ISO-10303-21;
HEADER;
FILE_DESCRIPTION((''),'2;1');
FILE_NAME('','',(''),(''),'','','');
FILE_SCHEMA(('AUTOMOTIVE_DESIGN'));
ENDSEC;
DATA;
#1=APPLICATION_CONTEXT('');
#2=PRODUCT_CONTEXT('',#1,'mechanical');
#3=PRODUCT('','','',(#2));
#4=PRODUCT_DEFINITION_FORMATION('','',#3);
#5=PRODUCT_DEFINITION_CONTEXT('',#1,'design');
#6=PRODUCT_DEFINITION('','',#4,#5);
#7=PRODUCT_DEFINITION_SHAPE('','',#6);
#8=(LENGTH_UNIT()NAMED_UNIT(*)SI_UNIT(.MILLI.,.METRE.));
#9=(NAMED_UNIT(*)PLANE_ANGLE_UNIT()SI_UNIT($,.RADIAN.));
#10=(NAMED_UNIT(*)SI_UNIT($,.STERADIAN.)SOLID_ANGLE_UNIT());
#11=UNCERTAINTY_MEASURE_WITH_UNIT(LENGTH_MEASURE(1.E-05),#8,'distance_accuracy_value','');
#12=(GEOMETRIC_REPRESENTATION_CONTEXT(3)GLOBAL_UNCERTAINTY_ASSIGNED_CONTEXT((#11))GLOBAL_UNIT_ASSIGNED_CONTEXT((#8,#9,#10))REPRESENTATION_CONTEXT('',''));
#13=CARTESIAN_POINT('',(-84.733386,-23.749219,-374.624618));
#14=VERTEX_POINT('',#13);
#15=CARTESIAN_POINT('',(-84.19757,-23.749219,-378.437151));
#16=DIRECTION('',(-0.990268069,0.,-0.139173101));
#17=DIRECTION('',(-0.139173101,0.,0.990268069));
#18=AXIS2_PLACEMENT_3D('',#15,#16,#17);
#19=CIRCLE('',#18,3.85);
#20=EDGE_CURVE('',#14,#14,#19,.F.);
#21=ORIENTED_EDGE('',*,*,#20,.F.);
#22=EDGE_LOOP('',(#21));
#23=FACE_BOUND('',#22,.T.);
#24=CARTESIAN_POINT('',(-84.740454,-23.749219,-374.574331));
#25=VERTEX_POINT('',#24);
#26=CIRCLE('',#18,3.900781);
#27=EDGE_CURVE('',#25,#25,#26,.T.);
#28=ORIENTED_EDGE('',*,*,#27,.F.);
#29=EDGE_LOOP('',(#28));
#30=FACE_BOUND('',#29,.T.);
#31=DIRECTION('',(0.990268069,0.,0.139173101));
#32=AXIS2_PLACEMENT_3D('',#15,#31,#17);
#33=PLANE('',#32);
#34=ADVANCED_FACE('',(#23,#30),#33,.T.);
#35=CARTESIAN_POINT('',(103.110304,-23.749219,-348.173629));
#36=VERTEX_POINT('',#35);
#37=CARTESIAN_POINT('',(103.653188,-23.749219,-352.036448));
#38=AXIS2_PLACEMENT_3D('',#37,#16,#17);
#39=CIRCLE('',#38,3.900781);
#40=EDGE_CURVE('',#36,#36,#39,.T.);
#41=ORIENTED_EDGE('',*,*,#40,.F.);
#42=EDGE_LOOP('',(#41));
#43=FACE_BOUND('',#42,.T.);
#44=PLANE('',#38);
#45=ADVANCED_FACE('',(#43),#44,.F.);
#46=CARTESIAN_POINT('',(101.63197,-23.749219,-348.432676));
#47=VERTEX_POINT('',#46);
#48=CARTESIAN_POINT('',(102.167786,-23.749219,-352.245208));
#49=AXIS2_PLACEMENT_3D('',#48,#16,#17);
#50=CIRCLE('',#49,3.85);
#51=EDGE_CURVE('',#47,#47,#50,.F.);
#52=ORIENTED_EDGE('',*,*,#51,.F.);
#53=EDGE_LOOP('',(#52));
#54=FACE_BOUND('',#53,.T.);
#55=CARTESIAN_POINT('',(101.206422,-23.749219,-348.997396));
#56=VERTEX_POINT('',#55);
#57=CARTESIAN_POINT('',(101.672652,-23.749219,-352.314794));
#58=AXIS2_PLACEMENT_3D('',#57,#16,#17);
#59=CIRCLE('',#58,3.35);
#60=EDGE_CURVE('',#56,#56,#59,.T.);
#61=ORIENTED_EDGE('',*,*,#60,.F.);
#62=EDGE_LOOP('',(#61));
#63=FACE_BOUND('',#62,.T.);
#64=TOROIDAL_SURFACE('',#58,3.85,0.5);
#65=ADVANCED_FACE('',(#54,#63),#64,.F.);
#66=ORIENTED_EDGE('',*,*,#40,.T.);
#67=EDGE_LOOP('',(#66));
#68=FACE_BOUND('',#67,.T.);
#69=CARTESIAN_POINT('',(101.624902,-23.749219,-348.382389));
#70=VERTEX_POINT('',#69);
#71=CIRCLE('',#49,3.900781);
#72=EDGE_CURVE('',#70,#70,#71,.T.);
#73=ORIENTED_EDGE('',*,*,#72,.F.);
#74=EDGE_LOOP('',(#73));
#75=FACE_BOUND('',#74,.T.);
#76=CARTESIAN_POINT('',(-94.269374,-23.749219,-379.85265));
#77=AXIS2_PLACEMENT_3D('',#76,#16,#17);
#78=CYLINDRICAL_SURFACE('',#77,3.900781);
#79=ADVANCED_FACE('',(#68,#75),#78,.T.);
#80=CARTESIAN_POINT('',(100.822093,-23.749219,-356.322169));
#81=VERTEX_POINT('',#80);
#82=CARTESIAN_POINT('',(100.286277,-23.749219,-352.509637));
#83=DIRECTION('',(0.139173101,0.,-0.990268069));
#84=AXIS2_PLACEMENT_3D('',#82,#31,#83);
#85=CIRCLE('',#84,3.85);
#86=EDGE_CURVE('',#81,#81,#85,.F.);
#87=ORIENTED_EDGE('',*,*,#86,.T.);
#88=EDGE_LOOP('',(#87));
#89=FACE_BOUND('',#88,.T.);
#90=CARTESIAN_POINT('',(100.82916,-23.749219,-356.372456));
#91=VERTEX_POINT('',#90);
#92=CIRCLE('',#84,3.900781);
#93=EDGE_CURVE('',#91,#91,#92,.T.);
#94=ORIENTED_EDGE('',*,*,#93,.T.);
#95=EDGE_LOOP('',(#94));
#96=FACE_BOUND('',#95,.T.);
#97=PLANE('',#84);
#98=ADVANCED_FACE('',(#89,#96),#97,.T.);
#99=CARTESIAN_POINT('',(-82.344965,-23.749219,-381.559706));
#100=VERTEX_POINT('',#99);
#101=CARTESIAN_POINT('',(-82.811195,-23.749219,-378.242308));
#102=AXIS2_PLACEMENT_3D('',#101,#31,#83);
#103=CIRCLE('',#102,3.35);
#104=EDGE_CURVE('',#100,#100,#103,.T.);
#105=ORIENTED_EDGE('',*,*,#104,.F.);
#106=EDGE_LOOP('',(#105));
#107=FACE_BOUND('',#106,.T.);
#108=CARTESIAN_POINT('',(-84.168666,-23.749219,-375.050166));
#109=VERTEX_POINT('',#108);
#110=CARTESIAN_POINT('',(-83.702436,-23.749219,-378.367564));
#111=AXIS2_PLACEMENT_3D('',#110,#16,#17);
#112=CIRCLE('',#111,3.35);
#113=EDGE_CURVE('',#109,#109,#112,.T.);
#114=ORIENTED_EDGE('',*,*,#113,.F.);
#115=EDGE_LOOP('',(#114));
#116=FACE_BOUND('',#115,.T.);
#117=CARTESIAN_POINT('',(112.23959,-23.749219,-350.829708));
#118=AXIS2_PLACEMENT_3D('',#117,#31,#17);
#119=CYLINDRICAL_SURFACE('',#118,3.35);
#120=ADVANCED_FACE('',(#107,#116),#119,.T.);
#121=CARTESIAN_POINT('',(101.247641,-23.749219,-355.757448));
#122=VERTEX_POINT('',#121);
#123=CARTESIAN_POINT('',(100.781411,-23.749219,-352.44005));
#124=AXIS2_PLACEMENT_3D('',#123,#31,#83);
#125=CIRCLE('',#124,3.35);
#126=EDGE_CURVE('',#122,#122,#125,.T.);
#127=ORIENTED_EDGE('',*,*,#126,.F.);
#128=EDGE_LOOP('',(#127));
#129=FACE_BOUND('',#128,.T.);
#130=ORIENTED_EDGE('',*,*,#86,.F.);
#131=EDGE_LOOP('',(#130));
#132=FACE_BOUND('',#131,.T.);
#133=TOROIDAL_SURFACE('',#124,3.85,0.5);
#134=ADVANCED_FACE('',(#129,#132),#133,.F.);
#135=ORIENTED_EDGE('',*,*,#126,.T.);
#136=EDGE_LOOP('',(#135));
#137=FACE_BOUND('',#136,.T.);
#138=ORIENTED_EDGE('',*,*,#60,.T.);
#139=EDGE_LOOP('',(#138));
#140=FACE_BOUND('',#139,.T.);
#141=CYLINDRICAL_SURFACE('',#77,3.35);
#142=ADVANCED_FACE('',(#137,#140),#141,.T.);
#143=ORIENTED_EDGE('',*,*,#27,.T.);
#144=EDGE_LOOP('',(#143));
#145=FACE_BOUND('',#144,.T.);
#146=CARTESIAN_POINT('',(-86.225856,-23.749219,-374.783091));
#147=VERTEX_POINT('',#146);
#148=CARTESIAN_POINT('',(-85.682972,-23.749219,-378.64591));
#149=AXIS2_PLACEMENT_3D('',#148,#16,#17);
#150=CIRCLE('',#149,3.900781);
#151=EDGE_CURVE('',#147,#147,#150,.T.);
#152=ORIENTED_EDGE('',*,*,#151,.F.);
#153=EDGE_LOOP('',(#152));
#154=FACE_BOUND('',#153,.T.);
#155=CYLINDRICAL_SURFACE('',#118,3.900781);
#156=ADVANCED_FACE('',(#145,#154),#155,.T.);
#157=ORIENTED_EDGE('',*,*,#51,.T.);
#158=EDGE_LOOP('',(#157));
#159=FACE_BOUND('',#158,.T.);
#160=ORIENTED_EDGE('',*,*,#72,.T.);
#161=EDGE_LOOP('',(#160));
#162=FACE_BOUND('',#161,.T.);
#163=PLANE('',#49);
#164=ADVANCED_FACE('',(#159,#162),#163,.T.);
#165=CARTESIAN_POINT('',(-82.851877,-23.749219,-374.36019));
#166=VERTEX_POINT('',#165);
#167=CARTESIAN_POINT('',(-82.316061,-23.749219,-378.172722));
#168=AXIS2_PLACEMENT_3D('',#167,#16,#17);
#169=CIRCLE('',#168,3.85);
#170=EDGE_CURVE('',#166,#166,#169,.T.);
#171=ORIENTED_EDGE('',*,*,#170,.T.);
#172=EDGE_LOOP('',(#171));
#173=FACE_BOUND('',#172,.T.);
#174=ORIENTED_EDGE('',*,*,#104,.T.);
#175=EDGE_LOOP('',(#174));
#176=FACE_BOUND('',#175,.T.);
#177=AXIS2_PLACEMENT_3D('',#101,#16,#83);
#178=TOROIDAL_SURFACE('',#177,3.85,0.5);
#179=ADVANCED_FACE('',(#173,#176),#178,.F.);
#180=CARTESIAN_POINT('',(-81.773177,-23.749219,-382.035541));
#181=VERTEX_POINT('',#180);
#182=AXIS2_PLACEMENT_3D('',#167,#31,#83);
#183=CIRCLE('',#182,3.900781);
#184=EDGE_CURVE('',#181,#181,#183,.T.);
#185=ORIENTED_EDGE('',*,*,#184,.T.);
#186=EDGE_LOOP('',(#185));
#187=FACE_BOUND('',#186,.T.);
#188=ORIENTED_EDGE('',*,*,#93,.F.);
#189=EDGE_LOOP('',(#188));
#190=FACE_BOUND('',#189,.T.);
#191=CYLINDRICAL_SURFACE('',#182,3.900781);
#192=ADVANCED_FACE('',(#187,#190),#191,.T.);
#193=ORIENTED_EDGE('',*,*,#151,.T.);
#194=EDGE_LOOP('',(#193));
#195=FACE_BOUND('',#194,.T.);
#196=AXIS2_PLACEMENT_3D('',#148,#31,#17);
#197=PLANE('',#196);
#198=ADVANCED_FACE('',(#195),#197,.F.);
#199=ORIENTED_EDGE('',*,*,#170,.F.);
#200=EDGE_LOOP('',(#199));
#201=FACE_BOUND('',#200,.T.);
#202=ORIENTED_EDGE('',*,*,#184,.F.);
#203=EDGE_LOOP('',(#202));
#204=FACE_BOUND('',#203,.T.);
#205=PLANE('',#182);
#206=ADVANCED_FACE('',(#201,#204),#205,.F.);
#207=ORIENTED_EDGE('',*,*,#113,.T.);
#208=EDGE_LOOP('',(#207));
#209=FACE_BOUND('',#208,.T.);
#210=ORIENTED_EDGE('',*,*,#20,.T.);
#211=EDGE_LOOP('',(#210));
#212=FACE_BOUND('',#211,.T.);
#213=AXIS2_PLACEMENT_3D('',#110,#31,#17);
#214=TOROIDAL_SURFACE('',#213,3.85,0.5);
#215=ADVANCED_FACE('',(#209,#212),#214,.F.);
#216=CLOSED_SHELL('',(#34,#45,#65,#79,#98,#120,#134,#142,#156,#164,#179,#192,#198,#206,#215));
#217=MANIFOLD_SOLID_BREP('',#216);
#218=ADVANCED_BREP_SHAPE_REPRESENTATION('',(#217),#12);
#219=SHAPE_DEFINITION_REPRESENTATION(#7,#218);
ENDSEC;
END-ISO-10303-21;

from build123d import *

# Parameters (mm, degrees)
BOSS_EXTRUDE1_START     = -134.1464368
BOSS_EXTRUDE1_OUTLINE_R = 3.90078125
BOSS_EXTRUDE1_DEPTH     = 184.396875
SKETCH40_W              = 3.35
SKETCH40_H              = 1.9
FILLET1_R               = 0.5


# Read off the part's stored shape, not the designer's step: Boss-Extrude1
with BuildPart() as part:
    # Boss-Extrude1 outline → Boss-Extrude1 (new body)
    with BuildSketch(Plane(origin=(0, 0, 0), x_dir=(0, 1, 0), z_dir=(0.9902680687415714, 0, 0.13917310096005805)).offset(BOSS_EXTRUDE1_START)):
        with Locations((-23.74921875, -363.03618928)):
            Circle(BOSS_EXTRUDE1_OUTLINE_R)
    extrude(amount=BOSS_EXTRUDE1_DEPTH)

    # Sketch40 → Revolve1 (revolve)
    with BuildSketch(Plane(origin=(0, -23.74921875, 0), x_dir=(-0.13917310096005797, 0, 0.9902680687415715), z_dir=(0, 1, 0)), mode=Mode.PRIVATE) as revolve1_sk:
        with Locations((-364.71118928, 51.2004382)):
            Rectangle(SKETCH40_W, SKETCH40_H)
        Polygon((-366.93697053, 52.1504382), (-366.38618928, 52.1504382), (-363.03618928, 52.1504382), (-363.03618928, 53.6504382), (-366.93697053, 53.6504382), align=None)
    revolve(revolve1_sk.sketch.rotate(Axis((-198147.883122307, -23.74921875, -28214.472842277), (0.9902680687415714, 0, 0.1391731009600579)), 180), axis=Axis((-198147.883122307, -23.74921875, -28214.472842277), (0.9902680687415714, 0, 0.1391731009600579)))

    # Fillet1
    fillet1_edges = [part.edges().sort_by_distance(p)[0] for p in [
        (100.752506501, -23.74921875, -355.827034763),
        (102.634015832, -23.74921875, -355.562605871),
    ]]
    fillet(fillet1_edges, radius=FILLET1_R)

    # Mirror2: part across plane


with BuildPart() as part_1:
    add(part.part)
    add(part.part.mirror(Plane(origin=(-41.539764254, 0, -5.838033142), x_dir=(-0.13917310096005794, 0, 0.9902680687415714), z_dir=(0.9902680687415714, 0, 0.13917310096005794))))


solid = part_1.part
